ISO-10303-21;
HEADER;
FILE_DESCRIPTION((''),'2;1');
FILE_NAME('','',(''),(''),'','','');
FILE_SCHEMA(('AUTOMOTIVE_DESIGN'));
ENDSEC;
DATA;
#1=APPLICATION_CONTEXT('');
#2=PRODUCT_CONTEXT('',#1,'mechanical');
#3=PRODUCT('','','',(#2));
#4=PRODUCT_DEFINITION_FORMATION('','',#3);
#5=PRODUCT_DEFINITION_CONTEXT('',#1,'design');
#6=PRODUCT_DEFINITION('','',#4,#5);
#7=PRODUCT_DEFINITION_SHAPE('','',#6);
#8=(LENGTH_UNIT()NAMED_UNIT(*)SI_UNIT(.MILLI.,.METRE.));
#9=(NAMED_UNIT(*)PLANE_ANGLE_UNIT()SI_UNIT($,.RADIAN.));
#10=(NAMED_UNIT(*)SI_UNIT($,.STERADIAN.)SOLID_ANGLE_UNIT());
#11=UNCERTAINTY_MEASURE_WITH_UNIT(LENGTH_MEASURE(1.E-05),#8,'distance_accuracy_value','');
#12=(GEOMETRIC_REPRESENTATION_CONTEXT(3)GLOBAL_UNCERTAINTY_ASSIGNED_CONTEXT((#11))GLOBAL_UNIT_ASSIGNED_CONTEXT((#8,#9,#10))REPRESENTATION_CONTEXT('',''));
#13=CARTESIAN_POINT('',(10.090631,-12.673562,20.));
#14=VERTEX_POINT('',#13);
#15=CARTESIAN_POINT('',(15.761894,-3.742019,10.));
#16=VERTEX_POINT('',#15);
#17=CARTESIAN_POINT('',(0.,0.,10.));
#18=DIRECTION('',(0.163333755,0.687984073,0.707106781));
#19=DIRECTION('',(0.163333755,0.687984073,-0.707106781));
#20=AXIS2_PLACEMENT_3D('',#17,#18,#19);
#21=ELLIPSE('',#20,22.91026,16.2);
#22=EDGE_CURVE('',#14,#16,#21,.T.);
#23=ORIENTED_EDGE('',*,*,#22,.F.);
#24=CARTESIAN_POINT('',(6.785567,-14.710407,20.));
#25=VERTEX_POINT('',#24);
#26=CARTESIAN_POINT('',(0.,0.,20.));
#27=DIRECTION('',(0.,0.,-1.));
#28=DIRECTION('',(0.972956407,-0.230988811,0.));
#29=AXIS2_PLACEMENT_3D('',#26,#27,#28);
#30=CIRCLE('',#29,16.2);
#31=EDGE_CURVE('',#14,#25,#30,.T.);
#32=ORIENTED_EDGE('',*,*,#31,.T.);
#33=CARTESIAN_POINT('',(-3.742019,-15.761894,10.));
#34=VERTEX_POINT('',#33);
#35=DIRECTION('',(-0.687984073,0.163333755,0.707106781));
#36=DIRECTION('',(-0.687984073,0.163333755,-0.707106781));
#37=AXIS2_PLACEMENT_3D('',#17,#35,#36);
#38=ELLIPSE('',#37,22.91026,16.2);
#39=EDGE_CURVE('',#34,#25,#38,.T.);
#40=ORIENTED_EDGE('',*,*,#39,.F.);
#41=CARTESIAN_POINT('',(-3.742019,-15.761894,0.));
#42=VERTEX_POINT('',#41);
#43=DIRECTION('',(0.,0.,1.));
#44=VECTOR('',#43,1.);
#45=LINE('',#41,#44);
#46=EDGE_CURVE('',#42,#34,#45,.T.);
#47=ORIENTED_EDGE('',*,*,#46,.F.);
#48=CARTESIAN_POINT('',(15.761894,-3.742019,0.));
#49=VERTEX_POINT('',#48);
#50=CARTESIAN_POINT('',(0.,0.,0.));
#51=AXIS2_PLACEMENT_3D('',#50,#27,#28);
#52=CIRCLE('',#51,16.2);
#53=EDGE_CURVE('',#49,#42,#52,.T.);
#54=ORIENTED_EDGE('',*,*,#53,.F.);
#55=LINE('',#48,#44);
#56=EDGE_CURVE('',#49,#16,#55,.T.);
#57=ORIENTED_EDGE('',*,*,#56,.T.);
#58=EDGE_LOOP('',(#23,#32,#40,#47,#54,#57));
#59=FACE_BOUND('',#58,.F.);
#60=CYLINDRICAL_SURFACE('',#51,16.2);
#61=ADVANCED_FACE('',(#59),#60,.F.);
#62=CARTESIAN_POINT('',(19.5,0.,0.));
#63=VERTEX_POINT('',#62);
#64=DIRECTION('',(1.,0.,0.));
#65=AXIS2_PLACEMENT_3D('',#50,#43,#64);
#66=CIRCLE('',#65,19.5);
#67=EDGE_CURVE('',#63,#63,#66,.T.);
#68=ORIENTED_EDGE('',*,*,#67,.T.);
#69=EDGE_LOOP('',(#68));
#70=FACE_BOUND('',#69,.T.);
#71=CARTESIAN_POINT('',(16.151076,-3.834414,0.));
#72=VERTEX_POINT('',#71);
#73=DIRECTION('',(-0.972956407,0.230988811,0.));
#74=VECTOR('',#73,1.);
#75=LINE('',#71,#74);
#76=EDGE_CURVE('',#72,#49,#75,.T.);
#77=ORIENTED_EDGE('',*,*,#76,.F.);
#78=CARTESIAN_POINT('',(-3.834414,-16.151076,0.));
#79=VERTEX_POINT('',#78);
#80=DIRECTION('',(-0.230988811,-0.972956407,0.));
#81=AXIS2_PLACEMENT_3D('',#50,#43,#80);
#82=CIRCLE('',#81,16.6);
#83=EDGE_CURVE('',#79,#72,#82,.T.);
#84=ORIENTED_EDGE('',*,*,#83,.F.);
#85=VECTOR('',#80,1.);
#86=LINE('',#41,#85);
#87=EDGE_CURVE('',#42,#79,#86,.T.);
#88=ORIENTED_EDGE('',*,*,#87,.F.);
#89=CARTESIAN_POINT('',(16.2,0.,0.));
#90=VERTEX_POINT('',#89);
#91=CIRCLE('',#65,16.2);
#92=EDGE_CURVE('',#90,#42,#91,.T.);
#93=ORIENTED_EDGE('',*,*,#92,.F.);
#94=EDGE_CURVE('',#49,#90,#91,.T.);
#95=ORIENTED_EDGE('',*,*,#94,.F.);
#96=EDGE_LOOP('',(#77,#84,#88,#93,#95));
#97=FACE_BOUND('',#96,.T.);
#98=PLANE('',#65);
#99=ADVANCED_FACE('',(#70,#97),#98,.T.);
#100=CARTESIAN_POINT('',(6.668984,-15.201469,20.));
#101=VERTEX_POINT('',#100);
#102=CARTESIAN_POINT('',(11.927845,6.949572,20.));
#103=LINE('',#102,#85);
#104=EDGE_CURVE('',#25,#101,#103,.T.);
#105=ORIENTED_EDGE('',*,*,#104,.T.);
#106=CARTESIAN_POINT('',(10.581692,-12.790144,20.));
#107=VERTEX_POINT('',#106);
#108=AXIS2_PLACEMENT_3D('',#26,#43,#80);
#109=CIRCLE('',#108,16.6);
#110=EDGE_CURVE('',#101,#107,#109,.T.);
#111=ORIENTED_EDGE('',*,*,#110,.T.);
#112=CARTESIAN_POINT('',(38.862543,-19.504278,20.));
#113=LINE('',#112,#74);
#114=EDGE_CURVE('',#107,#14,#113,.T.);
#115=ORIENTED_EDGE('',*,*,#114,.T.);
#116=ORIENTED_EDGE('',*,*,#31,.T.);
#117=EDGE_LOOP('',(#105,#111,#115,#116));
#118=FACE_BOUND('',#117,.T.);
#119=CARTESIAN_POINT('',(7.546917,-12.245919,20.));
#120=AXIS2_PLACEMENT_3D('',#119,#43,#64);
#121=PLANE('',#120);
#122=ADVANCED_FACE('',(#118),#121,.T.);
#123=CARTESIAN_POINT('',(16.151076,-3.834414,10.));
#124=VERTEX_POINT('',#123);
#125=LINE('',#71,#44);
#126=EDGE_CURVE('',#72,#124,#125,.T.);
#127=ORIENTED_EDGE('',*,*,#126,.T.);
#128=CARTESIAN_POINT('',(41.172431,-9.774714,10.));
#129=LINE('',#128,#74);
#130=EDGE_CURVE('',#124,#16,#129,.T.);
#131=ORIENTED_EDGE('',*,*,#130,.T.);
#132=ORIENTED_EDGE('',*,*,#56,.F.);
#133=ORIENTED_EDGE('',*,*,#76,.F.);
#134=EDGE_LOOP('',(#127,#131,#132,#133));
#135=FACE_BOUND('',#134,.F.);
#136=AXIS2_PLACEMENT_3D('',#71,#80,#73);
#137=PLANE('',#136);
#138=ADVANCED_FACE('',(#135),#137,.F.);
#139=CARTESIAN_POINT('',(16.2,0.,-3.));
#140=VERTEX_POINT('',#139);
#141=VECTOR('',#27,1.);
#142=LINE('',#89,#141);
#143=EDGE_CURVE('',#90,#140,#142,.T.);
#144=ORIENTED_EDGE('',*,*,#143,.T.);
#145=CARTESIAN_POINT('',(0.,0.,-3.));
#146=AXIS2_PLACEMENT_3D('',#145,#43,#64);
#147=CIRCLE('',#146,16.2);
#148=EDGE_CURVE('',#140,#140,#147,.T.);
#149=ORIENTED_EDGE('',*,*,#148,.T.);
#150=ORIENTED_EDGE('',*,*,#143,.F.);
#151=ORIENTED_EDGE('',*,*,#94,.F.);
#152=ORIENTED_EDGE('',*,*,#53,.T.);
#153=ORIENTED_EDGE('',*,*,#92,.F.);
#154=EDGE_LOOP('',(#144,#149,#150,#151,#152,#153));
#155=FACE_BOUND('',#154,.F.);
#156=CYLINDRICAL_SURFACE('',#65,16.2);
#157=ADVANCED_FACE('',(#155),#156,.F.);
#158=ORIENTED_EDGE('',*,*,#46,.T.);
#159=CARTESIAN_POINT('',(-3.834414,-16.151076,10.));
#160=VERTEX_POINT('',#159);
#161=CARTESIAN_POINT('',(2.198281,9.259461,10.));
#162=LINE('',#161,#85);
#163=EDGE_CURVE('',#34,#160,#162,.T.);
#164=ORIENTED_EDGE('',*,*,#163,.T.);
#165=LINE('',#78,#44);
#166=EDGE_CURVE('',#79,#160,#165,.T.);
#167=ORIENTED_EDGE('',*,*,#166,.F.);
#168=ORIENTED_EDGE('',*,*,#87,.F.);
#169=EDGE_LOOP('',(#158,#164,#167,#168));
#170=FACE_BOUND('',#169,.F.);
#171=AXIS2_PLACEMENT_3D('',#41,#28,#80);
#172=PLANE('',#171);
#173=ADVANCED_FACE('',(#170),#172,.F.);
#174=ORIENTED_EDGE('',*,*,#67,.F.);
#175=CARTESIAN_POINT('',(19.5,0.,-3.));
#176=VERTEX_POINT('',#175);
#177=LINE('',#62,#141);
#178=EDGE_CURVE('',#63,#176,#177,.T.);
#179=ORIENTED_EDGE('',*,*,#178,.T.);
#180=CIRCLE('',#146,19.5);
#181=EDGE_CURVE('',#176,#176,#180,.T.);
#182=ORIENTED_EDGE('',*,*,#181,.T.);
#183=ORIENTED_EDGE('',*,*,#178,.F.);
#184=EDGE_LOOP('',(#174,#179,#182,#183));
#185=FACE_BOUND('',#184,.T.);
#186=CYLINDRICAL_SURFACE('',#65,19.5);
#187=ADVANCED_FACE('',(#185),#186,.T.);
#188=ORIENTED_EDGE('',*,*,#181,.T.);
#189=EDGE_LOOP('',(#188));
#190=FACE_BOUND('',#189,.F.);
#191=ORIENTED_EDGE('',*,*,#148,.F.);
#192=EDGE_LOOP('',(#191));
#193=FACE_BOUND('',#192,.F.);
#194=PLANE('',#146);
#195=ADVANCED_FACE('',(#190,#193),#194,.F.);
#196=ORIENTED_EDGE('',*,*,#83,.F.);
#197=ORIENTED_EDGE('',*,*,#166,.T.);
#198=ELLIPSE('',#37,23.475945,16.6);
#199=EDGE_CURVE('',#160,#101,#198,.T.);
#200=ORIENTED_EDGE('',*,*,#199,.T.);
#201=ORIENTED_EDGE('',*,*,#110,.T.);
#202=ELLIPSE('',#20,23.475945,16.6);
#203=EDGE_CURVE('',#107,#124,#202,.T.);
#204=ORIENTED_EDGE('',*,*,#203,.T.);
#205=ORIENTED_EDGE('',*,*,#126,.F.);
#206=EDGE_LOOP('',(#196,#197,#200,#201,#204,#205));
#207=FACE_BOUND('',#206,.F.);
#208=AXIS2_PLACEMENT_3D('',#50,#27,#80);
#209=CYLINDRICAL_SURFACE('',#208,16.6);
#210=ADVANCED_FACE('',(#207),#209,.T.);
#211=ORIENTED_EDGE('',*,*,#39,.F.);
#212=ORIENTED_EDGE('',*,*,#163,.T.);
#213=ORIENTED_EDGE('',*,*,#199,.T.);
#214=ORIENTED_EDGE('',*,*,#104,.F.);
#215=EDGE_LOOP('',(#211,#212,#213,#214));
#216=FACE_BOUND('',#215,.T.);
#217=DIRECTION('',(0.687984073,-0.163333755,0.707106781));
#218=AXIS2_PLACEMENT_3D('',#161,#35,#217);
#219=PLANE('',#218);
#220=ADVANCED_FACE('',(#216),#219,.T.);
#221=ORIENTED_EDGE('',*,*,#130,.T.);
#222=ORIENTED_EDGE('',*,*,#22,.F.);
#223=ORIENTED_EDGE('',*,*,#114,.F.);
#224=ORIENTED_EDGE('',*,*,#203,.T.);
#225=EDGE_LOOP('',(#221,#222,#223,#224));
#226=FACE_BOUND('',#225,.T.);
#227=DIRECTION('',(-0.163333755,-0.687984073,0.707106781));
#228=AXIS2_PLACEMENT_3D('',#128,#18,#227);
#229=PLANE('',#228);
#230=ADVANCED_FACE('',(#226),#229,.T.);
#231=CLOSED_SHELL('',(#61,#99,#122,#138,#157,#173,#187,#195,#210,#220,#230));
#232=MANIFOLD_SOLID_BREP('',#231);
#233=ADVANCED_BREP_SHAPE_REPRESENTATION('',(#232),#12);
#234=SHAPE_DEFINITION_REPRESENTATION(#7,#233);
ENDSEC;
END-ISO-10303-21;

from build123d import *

# Parameters (mm, degrees)
F1_DEPTH    = 20
F2_R        = 19.5
F2_R_2      = 16.2
F3_DEPTH    = 3
F4_T1_DEPTH = 51.8336597593
F4_T3_DEPTH = 51.8336597593


# Not quite as in the source:
# - a fillet or chamfer that OpenCascade refuses, or shapes differently, is made with other operations: its cross-section is extruded or revolved along the edge and cut away or added


with BuildPart() as f1:
    # F0 (on Top) → F1 (new body)
    with BuildSketch(Plane.XY):
        with BuildLine():
            ThreePointArc((15.7618937877, -3.7420187366), (8.4993351577, -13.7913488056), (-3.7420187366, -15.7618937877))
            Line((-3.7420187366, -15.7618937877), (-3.8344142609, -16.1510763504))
            ThreePointArc((-3.8344142609, -16.1510763504), (8.709195285, -14.1318759366), (16.1510763504, -3.8344142609))
            Line((16.1510763504, -3.8344142609), (15.7618937877, -3.7420187366))
        make_face()
    extrude(amount=F1_DEPTH)

    # F2 (on Top) → F3 (join)
    with BuildSketch(Plane.XY):
        Circle(F2_R)
        Circle(F2_R_2, mode=Mode.SUBTRACT)
    extrude(amount=-F3_DEPTH)

    # F4: chamfer of 10 on 2 edges, made by hand

    # F4_s2 → F4_t1 (cut)
    with BuildSketch(Plane(origin=(41.1724307405, -9.7747142149, 0), x_dir=(0, 0, 1), z_dir=(-0.9729564066, 0.2309888109, 0))):
        Polygon((10, 0), (20, -10), (20, 0), align=None)
    extrude(amount=F4_T1_DEPTH, mode=Mode.SUBTRACT)

    # F4_s4 → F4_t3 (cut)
    with BuildSketch(Plane(origin=(2.1982812174, 9.2594606024, 0), x_dir=(0, 0, 1), z_dir=(-0.2309888109, -0.9729564066, 0))):
        Polygon((10, 0), (20, -10), (20, 0), align=None)
    extrude(amount=F4_T3_DEPTH, mode=Mode.SUBTRACT)


solid = f1.part
